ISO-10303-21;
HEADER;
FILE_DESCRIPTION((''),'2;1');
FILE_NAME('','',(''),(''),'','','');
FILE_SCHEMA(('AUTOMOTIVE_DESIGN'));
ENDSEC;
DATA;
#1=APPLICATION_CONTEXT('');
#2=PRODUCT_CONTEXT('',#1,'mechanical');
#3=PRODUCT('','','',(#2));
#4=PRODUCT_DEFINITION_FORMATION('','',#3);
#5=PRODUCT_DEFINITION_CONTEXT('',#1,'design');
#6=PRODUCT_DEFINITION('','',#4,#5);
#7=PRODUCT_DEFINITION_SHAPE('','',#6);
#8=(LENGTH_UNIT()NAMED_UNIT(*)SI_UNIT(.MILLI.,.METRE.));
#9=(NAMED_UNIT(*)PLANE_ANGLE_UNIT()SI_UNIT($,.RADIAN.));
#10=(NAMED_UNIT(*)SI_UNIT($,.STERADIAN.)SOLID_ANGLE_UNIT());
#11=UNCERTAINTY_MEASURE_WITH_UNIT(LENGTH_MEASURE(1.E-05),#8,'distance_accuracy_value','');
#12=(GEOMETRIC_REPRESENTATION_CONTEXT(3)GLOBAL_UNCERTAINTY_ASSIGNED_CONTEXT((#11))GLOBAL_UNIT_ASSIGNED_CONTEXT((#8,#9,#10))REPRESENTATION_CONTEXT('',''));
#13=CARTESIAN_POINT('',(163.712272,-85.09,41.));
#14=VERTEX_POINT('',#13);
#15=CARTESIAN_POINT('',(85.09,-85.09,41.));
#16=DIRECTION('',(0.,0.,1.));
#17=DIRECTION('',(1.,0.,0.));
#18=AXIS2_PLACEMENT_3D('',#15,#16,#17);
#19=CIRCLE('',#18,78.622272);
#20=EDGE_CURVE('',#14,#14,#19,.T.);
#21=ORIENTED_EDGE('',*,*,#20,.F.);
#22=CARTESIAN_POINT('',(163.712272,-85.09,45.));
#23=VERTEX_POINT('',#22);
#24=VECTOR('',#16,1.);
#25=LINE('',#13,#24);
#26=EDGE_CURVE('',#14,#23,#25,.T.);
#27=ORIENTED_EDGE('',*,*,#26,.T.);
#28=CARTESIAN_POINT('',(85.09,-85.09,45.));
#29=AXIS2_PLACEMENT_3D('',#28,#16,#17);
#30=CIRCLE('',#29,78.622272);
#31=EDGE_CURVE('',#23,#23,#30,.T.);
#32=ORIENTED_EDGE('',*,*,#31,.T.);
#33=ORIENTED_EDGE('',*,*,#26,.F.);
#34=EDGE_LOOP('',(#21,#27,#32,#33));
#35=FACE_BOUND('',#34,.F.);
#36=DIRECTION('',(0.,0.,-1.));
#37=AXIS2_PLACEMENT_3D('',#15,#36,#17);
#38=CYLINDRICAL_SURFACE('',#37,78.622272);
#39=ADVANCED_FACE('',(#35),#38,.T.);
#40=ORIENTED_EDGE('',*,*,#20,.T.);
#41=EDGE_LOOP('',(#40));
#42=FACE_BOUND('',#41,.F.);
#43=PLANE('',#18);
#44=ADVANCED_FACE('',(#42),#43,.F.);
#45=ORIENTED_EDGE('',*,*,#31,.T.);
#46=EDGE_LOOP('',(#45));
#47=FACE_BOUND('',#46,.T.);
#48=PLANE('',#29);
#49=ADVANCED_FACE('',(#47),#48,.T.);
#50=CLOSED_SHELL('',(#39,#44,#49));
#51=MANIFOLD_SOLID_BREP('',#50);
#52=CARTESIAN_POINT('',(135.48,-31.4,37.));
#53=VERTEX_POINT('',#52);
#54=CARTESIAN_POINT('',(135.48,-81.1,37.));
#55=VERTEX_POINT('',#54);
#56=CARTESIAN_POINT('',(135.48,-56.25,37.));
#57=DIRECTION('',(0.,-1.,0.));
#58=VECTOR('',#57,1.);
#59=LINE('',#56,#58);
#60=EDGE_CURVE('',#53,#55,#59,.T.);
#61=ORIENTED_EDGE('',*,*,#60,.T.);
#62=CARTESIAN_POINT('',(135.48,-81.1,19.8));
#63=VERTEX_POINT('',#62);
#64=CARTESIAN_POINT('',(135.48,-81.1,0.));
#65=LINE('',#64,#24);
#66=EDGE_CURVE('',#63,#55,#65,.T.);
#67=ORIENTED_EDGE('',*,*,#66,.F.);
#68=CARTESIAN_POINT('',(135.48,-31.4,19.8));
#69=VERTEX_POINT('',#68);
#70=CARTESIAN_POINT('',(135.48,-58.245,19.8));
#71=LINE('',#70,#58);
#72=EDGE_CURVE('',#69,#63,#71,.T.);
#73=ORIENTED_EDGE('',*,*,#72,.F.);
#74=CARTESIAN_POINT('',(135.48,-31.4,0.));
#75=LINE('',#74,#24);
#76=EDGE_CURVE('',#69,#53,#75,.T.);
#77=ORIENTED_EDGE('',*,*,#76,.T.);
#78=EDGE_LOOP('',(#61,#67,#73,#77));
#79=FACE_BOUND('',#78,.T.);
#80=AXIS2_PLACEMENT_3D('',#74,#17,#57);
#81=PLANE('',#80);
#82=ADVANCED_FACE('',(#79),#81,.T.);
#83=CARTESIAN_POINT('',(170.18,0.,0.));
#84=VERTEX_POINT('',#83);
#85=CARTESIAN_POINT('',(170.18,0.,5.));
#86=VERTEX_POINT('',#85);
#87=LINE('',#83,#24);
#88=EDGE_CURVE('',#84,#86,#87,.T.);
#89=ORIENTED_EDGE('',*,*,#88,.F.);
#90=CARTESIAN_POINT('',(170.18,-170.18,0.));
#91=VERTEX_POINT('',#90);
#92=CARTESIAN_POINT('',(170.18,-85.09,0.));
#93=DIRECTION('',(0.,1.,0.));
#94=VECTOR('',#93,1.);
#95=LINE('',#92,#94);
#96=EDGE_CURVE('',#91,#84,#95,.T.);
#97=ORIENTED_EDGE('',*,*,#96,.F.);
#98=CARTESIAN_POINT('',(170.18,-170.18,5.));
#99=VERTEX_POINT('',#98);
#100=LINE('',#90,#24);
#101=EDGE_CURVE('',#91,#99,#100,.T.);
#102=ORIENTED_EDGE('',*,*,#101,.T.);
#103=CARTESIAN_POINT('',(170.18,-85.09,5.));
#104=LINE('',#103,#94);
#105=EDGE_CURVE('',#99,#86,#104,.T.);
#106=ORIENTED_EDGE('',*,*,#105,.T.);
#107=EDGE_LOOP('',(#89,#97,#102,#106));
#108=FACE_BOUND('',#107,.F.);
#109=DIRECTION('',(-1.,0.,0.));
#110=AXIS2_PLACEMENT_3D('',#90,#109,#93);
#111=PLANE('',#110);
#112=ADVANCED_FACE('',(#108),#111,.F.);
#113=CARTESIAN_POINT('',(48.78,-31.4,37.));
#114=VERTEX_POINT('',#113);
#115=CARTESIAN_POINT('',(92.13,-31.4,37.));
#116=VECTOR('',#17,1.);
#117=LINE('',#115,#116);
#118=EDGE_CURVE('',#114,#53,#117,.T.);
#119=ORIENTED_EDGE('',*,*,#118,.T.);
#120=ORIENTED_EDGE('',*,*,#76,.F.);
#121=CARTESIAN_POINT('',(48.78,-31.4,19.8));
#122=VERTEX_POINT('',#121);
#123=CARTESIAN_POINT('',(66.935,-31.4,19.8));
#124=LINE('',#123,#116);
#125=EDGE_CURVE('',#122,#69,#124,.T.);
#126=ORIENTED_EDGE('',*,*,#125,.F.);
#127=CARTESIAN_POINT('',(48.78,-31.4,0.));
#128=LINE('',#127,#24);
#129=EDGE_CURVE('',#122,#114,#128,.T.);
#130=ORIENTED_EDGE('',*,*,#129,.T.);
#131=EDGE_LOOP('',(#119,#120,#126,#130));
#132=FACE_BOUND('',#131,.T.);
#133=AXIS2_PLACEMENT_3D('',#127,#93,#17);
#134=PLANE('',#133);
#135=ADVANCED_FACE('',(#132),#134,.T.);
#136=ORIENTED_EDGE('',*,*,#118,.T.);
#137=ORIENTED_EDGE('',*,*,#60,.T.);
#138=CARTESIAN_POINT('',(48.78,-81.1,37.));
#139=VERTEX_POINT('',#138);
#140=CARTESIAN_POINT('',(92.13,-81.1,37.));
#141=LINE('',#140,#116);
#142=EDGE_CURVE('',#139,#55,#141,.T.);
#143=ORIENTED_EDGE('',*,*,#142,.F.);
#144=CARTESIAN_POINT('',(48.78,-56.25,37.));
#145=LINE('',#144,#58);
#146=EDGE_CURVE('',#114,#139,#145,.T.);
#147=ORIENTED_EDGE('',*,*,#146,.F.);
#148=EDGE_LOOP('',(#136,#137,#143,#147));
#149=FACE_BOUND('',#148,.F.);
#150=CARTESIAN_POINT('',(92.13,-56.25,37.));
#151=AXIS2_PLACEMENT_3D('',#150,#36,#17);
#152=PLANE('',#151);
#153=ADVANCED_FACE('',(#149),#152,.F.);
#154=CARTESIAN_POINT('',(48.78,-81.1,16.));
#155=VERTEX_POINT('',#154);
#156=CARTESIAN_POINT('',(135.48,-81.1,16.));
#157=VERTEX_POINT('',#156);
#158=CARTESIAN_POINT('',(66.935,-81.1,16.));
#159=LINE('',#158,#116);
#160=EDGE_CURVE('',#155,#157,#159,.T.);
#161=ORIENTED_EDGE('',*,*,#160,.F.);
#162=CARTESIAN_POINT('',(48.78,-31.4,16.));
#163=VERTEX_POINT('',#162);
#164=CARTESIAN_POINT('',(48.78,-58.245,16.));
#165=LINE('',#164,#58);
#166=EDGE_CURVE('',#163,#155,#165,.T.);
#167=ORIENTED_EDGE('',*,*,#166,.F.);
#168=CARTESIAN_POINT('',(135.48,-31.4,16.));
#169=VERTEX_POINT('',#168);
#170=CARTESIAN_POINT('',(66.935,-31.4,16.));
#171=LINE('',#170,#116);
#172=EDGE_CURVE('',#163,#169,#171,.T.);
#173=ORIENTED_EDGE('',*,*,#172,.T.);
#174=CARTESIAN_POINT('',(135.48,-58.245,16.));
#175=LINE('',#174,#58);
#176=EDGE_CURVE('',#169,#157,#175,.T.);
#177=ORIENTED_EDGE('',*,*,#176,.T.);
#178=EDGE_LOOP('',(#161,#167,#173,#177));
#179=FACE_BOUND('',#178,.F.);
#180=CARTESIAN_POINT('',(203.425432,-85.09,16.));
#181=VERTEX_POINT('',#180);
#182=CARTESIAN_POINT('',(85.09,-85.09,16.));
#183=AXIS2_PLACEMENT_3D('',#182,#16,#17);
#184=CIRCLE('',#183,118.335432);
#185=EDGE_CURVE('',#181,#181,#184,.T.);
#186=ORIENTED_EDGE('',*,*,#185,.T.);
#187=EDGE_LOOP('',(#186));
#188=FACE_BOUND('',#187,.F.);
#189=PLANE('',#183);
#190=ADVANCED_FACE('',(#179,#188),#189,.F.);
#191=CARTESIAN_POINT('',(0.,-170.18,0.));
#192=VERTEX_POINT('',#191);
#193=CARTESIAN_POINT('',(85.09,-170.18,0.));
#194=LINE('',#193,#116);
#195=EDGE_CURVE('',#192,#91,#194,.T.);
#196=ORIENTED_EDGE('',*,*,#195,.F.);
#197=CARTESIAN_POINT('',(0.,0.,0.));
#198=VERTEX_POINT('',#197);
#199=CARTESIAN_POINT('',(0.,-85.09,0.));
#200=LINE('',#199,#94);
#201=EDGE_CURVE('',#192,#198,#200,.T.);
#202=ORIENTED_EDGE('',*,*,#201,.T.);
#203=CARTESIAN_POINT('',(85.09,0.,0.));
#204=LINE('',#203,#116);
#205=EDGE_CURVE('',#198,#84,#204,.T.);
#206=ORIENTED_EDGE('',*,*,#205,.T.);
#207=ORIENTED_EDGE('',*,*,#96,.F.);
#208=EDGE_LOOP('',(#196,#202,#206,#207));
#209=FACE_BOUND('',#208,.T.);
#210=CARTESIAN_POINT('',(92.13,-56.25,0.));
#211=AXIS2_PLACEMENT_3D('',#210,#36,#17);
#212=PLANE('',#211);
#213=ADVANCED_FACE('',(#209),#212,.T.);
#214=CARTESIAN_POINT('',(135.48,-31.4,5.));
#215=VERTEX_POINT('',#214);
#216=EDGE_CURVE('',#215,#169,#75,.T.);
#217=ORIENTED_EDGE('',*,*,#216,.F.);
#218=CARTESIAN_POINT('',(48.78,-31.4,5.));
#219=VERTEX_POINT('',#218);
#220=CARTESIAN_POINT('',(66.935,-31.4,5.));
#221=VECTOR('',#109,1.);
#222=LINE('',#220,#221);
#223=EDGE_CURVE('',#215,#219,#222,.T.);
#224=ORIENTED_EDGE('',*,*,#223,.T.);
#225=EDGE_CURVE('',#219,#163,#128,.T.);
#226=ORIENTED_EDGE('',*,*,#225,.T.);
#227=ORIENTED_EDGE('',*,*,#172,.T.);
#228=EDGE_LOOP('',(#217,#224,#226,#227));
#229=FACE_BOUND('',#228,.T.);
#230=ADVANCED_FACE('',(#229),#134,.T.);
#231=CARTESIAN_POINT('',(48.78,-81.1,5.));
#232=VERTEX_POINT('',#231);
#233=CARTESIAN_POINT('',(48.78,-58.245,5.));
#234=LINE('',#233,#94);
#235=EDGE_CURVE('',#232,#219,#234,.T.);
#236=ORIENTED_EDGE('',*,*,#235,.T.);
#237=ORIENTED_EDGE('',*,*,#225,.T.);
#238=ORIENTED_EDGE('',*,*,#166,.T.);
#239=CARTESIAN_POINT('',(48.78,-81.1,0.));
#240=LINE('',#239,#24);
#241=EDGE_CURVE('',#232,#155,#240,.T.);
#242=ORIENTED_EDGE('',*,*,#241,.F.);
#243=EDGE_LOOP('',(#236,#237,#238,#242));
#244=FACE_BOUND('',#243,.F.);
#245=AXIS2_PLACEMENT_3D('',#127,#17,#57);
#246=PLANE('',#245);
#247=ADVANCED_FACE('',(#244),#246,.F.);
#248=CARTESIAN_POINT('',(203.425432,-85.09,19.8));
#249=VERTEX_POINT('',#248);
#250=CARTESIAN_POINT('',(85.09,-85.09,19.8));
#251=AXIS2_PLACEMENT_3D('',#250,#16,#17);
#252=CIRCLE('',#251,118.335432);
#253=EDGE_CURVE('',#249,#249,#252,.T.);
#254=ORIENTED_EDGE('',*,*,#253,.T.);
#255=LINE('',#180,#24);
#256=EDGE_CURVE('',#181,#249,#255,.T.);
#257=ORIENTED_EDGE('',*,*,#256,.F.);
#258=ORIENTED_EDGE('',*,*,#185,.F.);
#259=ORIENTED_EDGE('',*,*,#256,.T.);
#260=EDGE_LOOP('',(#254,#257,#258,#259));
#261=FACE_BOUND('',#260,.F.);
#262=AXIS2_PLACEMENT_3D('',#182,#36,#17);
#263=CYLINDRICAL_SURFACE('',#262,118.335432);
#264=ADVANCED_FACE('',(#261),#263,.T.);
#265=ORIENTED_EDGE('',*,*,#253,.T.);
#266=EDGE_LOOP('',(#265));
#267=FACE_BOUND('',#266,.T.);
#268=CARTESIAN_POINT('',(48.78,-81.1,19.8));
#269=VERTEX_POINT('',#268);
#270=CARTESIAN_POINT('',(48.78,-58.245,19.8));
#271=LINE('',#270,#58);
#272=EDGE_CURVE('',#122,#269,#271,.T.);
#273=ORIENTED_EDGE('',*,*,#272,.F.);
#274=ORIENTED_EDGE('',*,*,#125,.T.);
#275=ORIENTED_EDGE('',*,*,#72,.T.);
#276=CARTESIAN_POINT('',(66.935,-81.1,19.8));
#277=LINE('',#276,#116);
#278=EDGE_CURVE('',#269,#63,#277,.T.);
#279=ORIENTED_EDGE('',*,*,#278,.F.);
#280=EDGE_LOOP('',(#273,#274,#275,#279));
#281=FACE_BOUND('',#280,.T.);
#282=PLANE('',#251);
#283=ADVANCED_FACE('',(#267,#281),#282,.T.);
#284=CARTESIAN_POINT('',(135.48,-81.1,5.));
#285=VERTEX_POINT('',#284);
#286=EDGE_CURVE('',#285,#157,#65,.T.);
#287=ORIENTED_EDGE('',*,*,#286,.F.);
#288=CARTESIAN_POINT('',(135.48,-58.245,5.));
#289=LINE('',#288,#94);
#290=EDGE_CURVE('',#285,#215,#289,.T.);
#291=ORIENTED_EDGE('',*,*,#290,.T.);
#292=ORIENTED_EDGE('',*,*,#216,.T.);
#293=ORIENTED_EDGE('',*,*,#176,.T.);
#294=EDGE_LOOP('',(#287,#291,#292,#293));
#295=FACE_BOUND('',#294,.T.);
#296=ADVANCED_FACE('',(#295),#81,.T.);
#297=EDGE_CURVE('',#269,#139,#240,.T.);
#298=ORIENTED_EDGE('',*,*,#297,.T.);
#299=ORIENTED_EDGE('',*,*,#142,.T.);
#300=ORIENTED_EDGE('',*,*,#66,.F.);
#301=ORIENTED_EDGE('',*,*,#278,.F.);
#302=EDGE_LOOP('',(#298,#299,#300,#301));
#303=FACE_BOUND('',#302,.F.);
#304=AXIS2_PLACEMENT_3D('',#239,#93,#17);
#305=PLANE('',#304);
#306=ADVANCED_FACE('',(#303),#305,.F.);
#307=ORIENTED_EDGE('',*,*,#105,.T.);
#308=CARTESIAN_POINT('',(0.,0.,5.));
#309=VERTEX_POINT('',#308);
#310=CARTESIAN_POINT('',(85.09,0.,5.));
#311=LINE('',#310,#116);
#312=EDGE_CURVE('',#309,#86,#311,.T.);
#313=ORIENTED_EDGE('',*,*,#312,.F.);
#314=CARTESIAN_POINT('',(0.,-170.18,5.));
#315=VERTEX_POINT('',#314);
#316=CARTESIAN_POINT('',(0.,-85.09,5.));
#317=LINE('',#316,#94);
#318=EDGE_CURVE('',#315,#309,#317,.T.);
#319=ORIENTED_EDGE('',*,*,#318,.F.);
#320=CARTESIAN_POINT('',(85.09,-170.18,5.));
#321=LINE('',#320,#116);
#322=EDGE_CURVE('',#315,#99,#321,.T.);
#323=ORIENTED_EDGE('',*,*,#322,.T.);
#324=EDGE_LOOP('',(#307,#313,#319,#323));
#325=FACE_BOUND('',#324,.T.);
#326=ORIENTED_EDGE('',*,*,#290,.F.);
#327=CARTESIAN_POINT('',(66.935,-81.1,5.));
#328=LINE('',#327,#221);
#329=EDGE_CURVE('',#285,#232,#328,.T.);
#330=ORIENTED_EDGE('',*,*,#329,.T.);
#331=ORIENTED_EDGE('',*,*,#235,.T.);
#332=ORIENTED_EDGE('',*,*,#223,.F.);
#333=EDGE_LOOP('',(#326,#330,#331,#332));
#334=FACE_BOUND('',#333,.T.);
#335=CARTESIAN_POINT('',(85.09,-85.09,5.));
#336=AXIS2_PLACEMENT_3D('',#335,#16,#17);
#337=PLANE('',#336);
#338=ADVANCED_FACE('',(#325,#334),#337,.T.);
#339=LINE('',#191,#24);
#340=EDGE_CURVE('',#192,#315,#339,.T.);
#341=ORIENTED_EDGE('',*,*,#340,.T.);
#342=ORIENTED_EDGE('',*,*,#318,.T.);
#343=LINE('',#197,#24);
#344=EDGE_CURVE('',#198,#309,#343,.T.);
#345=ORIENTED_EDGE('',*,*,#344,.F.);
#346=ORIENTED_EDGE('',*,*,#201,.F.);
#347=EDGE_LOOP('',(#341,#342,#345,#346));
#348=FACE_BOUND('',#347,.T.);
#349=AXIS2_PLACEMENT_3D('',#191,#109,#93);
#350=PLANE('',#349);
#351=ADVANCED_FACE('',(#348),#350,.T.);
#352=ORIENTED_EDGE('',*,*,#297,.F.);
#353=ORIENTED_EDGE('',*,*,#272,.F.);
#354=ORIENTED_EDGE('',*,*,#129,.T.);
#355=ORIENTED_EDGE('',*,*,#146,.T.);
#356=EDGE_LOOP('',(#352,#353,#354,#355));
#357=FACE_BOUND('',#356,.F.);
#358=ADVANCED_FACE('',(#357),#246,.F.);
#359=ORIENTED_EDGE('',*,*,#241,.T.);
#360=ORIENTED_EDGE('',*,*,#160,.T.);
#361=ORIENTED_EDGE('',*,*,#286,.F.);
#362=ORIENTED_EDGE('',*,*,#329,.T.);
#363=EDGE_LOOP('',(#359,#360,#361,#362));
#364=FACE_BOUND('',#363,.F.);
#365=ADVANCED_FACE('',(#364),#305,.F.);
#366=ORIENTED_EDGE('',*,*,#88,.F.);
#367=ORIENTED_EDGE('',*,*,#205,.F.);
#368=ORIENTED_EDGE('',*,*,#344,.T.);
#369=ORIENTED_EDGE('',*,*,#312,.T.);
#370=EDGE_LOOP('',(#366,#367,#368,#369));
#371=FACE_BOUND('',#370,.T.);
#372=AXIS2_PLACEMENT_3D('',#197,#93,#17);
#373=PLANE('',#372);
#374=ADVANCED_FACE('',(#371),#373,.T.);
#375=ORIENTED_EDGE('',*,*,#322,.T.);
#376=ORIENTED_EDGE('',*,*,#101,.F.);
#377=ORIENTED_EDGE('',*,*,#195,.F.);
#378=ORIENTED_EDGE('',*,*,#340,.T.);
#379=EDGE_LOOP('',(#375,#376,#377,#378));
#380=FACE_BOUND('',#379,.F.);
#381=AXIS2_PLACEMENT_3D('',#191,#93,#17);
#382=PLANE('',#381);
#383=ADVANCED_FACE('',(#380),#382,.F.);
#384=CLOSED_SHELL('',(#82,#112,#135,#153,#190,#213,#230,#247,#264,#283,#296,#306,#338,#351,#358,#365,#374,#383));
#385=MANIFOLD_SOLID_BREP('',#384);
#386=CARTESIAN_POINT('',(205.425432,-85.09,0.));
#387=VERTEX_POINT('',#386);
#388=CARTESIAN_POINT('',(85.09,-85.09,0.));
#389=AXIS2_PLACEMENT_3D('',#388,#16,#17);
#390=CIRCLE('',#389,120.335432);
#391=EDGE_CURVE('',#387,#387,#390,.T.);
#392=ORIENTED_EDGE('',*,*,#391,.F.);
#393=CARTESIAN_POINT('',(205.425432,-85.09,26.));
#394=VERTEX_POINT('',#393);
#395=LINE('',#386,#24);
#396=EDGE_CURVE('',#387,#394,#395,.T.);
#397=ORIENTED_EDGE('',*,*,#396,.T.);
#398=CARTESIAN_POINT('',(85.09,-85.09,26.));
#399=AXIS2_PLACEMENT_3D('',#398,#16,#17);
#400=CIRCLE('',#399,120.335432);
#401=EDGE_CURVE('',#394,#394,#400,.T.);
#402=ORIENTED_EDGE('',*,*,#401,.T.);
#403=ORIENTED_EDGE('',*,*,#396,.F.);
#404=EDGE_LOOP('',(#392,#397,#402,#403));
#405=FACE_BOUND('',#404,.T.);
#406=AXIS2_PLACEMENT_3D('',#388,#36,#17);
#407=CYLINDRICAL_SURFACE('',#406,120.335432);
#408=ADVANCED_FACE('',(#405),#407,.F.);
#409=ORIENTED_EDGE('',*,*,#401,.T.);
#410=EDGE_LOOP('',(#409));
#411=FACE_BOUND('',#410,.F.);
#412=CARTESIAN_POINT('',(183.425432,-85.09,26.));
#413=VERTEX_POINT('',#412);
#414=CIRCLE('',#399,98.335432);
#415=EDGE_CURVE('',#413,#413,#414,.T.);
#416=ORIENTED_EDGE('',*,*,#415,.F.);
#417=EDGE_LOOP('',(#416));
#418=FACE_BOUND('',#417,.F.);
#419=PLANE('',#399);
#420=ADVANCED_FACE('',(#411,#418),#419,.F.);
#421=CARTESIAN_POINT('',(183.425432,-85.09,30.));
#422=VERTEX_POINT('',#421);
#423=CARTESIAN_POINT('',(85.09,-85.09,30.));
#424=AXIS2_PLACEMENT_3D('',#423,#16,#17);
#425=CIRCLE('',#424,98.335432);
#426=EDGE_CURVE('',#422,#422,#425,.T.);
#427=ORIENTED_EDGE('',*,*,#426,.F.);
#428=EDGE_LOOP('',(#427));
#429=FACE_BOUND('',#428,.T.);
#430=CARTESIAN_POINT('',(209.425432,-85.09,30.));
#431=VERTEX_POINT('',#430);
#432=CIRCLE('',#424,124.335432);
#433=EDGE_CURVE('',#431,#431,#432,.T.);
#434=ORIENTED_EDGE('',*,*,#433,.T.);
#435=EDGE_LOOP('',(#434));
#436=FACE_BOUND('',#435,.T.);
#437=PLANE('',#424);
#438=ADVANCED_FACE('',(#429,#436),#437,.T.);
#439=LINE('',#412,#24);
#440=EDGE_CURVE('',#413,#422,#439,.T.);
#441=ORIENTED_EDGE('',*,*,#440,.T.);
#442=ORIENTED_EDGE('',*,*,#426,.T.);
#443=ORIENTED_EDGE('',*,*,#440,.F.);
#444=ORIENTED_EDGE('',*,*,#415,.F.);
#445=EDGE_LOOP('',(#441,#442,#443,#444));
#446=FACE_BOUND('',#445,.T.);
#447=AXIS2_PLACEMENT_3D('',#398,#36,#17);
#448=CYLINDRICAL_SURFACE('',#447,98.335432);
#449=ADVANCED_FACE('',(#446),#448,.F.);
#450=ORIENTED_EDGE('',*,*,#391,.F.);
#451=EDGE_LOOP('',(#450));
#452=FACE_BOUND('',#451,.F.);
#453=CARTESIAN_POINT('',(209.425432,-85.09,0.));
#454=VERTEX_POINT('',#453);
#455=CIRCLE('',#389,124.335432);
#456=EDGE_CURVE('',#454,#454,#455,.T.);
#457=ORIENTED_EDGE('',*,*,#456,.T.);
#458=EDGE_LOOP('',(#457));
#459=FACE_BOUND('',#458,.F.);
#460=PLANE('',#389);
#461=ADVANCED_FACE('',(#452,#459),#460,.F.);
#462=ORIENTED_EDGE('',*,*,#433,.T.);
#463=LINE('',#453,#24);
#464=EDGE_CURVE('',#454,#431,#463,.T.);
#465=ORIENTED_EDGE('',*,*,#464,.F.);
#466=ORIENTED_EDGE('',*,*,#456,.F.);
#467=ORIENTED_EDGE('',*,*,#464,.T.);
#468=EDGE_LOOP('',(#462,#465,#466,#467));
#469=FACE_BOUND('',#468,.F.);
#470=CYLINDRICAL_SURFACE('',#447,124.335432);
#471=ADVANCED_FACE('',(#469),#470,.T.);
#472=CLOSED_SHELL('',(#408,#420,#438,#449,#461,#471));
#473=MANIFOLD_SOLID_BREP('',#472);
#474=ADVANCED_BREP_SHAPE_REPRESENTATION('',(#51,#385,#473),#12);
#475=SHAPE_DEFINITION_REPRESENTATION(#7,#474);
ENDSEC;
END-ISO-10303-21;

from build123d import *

# Parameters (mm, degrees)
F0_W      = 170.18
F0_H      = 170.18
F1_DEPTH  = 5
F2_W      = 86.7
F2_H      = 49.7
F3_DEPTH  = 37
F6_START  = 11
F5_R      = 118.3354320223
F6_DEPTH  = 3.8
F4_R      = 124.3354320223
F4_R_2    = 120.3354320223
F8_DEPTH  = 26
F9_R      = 124.3354320223
F9_R_2    = 98.3354320223
F10_DEPTH = 4
F12_START = 4
F11_R     = 78.6222719846
F12_DEPTH = 4


# Not quite as in the source:
# - the program builds the solid bodies; features that only make, move or delete a surface that nothing else refers to are left out


with BuildPart() as f1:
    # F0 (on Top) → F1 (new body)
    with BuildSketch(Plane.XY):
        with Locations((85.09, -85.09)):
            Rectangle(F0_W, F0_H)
    extrude(amount=F1_DEPTH)

    # F2 (on face) → F3 (join)
    with BuildSketch(Plane(origin=(0, 0, 0), x_dir=(1, 0, 0), z_dir=(0, 0, -1))):
        with Locations((92.13, 56.25)):
            Rectangle(F2_W, F2_H)
    extrude(amount=-F3_DEPTH)

    # F5 (on face) → F6 (join)
    with BuildSketch(Plane.XY.offset(5).offset(F6_START)):
        with Locations((85.09, -85.09)):
            Circle(F5_R)
    extrude(amount=F6_DEPTH)


with BuildPart() as f8:
    # F4 (on Top) → F8 (new body)
    with BuildSketch(Plane.XY):
        with Locations((85.09, -85.09)):
            Circle(F4_R)
        with Locations((85.09, -85.09)):
            Circle(F4_R_2, mode=Mode.SUBTRACT)
    extrude(amount=F8_DEPTH)

    # F9 (on face) → F10 (join)
    with BuildSketch(Plane.XY.offset(26)):
        with Locations((85.09, -85.09)):
            Circle(F9_R)
        with Locations((85.09, -85.09)):
            Circle(F9_R_2, mode=Mode.SUBTRACT)
    extrude(amount=F10_DEPTH)


with BuildPart() as f12:
    # F11 (on face) → F12 (new body)
    with BuildSketch(Plane.XY.offset(37).offset(F12_START)):
        with Locations((85.09, -85.09)):
            Circle(F11_R)
    extrude(amount=F12_DEPTH)


solid = Compound([f1.part, f8.part, f12.part])
